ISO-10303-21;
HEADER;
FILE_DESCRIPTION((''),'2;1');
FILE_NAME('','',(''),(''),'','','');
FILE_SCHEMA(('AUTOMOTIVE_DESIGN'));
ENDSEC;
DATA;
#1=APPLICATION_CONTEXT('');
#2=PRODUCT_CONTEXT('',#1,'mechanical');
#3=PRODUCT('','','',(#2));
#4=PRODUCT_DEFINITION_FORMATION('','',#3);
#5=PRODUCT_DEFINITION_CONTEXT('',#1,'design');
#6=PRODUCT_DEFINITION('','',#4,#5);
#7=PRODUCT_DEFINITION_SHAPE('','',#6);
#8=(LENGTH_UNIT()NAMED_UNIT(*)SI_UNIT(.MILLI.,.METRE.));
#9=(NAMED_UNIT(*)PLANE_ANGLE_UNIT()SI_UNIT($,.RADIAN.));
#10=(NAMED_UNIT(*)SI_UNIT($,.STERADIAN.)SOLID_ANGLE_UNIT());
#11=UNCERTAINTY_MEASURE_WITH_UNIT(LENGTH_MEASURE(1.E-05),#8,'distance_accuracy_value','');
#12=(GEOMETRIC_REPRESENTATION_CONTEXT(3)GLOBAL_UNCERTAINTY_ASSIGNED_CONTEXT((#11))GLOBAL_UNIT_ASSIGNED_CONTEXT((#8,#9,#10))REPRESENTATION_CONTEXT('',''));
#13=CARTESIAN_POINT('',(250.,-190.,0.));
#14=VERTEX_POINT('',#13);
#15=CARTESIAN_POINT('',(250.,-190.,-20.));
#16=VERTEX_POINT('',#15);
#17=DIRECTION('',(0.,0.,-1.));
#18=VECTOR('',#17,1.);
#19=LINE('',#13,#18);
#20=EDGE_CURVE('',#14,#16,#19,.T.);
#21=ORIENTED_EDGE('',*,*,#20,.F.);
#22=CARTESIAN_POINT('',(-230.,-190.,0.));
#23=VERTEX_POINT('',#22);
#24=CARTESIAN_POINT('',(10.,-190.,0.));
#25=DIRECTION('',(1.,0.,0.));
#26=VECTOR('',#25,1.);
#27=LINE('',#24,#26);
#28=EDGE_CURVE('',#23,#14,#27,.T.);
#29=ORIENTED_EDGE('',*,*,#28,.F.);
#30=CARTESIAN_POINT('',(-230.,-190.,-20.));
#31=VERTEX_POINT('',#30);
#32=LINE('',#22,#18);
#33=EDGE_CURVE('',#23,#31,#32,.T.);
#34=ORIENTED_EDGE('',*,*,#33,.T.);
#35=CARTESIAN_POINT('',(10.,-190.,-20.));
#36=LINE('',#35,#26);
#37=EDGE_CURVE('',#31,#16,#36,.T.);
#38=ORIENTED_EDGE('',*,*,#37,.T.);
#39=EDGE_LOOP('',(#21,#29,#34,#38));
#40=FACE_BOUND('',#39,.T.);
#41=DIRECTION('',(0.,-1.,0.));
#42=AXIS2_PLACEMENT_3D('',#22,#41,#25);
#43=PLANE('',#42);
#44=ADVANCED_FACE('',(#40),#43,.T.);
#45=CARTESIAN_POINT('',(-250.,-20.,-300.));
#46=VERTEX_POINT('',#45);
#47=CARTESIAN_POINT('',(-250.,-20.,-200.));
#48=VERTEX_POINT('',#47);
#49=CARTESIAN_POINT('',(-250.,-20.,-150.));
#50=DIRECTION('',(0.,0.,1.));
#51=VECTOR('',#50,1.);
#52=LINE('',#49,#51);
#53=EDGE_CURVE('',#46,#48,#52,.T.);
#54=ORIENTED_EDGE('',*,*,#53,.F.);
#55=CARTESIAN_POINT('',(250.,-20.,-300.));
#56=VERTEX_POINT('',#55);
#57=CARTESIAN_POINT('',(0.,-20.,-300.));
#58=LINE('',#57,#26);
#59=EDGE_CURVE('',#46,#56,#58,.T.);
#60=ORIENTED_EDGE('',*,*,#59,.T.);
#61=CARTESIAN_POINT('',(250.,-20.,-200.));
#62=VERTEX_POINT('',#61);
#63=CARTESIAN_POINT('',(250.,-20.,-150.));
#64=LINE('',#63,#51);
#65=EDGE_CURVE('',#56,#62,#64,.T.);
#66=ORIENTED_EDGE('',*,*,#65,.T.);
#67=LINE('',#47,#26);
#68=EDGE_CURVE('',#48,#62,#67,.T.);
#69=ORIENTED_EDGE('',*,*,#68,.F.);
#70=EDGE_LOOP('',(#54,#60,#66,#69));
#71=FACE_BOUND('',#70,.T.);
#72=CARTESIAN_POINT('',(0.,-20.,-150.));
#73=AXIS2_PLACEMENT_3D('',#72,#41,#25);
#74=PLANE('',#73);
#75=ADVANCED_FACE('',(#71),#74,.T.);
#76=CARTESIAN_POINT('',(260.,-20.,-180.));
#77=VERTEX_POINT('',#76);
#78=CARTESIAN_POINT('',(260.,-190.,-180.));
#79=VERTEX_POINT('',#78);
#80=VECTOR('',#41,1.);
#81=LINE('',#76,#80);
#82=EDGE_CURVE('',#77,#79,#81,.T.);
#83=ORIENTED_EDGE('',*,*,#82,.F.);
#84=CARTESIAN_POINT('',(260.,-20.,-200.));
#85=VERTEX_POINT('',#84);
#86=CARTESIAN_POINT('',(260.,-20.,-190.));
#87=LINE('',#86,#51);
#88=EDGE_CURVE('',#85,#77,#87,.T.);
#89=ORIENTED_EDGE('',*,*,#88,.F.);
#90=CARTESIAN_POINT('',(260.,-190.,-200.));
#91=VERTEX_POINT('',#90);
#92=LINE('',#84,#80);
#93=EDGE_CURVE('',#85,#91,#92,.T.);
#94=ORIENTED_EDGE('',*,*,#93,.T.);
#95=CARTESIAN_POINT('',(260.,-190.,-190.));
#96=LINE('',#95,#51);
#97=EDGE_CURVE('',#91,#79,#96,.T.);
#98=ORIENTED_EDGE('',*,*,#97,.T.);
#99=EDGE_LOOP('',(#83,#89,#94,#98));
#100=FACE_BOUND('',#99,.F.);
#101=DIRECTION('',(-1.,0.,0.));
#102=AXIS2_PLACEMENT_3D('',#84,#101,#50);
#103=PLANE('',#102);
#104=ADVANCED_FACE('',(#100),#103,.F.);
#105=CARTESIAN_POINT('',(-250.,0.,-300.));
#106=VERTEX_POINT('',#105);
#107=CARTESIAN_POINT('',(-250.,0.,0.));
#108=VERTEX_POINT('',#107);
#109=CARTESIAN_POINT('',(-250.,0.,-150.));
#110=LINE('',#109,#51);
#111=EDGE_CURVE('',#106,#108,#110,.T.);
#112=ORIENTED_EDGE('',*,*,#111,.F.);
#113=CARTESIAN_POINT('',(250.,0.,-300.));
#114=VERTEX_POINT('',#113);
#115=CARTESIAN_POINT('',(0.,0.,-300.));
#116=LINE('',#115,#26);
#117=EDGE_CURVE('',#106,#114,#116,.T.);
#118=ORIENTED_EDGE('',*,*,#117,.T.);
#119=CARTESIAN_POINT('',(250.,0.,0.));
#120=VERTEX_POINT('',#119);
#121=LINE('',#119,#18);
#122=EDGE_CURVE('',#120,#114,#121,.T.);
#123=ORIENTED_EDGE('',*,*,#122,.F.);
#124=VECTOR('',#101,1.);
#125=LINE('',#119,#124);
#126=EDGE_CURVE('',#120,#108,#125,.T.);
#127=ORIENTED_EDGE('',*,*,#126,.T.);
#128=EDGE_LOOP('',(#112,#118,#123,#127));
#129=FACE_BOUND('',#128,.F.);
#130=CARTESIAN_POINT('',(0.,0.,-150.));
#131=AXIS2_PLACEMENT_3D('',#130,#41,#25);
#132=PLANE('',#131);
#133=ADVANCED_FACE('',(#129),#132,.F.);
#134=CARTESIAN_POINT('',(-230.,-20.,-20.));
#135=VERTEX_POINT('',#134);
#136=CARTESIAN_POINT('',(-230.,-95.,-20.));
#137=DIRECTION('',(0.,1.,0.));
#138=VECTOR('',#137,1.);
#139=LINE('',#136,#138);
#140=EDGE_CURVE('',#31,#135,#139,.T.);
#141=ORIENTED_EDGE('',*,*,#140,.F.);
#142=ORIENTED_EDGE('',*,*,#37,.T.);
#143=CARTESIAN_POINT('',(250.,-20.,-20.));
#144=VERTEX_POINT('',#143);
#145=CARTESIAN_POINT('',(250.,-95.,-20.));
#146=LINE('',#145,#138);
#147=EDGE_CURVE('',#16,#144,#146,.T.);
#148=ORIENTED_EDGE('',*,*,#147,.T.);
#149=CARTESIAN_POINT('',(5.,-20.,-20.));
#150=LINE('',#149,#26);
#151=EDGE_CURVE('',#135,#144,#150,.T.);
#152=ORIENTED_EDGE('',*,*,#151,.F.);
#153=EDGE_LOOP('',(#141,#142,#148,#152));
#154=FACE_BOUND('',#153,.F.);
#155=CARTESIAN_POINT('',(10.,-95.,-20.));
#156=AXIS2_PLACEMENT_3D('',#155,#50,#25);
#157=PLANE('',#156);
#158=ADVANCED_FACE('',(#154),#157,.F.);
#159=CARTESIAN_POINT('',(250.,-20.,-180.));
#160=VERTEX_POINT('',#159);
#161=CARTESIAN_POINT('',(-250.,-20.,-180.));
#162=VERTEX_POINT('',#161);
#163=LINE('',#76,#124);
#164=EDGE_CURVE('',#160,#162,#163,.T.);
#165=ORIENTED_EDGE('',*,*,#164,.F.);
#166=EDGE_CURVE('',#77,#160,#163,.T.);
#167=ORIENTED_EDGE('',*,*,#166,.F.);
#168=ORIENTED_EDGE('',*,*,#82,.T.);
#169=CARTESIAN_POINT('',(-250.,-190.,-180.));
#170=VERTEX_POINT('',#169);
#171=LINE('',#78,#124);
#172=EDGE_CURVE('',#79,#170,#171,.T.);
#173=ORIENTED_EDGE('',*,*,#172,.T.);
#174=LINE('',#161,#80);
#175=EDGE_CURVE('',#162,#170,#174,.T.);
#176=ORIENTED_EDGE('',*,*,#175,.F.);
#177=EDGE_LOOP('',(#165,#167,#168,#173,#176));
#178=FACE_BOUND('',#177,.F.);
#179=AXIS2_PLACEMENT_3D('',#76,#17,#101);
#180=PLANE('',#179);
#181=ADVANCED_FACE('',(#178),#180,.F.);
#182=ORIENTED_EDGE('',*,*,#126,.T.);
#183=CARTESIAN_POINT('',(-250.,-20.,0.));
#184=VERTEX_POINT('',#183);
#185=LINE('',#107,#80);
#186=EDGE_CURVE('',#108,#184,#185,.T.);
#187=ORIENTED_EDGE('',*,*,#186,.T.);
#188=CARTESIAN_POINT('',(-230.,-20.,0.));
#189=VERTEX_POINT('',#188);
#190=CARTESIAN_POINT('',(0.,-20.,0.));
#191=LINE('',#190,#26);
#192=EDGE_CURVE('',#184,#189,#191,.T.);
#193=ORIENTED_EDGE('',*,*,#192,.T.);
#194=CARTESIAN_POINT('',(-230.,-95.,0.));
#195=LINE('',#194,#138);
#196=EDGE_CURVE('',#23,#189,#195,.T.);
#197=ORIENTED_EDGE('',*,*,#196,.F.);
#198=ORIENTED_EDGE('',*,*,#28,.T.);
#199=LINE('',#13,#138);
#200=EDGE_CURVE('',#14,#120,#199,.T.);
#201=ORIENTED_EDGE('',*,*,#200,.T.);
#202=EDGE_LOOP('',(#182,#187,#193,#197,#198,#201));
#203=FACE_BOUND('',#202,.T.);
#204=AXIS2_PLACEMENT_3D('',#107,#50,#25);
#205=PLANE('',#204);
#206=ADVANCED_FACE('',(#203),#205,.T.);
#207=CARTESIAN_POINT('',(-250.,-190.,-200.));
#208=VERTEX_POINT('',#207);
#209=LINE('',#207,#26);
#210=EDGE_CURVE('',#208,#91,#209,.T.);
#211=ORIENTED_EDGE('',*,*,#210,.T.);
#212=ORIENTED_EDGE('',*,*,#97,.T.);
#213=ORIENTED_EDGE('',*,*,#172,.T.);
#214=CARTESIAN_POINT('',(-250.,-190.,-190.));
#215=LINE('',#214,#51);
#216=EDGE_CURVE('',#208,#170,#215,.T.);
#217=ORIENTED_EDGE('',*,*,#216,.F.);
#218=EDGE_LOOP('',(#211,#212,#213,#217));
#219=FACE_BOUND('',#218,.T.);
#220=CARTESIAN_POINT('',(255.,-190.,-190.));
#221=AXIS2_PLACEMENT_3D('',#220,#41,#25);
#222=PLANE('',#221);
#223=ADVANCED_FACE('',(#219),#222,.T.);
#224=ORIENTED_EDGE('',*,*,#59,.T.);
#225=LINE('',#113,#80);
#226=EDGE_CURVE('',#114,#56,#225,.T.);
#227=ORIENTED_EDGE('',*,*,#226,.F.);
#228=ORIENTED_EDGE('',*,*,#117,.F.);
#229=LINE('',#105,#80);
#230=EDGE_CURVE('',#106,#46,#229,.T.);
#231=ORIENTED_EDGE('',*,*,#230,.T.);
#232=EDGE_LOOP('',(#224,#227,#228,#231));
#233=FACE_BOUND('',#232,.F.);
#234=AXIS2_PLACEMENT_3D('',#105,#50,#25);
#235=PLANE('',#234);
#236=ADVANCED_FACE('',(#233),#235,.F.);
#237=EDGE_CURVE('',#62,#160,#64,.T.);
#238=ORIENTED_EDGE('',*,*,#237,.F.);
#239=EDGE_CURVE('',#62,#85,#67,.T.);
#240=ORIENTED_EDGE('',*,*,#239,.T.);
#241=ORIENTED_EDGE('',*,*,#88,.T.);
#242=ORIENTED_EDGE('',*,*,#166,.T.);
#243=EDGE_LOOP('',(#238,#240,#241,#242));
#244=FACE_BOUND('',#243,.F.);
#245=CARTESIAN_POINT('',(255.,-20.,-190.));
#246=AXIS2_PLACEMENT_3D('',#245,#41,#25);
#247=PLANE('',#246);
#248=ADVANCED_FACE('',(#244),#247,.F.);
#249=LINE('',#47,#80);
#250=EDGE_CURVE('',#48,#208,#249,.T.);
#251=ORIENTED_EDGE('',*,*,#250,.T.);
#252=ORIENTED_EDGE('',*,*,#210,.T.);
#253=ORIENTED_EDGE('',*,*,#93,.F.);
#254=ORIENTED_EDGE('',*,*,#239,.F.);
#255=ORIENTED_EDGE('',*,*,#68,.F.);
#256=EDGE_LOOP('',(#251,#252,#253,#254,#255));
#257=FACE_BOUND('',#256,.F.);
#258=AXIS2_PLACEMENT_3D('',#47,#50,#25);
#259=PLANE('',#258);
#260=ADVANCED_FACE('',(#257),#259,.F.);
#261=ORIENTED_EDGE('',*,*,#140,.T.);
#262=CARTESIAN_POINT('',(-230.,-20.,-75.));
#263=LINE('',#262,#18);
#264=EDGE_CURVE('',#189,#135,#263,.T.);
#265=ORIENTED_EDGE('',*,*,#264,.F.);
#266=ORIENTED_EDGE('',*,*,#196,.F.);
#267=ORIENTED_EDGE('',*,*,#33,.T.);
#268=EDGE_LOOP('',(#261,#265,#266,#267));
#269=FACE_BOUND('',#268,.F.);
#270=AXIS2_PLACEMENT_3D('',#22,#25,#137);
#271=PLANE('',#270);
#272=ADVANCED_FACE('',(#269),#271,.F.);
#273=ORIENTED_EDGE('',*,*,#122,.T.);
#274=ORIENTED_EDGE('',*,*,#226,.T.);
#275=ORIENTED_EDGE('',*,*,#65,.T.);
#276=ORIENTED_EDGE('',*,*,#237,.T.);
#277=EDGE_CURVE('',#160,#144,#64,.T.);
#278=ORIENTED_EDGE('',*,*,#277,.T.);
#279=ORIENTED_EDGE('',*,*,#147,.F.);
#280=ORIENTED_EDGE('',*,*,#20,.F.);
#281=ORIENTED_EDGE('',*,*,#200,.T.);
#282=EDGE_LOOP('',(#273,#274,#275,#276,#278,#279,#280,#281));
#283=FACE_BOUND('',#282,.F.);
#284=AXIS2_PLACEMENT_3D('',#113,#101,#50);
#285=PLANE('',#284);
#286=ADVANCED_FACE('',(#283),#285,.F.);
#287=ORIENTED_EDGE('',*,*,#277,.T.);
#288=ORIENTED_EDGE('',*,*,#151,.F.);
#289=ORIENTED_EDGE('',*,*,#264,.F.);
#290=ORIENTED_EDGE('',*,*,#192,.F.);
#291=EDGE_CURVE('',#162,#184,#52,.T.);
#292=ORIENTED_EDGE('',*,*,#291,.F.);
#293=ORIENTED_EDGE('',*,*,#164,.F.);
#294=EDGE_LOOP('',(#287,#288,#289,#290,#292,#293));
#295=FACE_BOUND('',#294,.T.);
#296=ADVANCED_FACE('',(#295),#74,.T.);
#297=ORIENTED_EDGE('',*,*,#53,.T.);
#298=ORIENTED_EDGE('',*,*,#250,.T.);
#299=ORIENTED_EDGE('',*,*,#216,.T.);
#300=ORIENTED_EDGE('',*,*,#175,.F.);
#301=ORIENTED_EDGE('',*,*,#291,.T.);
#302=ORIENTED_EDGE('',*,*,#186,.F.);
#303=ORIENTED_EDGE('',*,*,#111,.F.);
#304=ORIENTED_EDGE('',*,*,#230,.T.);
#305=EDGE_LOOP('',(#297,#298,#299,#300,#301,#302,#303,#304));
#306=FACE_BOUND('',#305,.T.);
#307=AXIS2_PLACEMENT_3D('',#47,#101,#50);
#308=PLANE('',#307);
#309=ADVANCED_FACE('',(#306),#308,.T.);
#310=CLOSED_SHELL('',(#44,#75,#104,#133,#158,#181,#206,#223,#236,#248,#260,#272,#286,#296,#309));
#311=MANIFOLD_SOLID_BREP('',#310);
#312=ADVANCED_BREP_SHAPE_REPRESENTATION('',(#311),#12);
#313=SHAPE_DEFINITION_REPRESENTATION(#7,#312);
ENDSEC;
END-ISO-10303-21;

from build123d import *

# Parameters (mm, degrees)
F0_W     = 480
F0_H     = 190
F1_DEPTH = 20
F2_W     = 500
F2_H     = 300
F3_DEPTH = 20
F4_W     = 10
F4_H     = 20
F4_W_2   = 500
F5_DEPTH = 170


# Not quite as in the source:
# - the program builds the solid bodies; features that only make, move or delete a surface that nothing else refers to are left out


with BuildPart() as f1:
    # F0 (on Top) → F1 (new body)
    with BuildSketch(Plane.XY):
        with Locations((10, -95)):
            Rectangle(F0_W, F0_H)
    extrude(amount=-F1_DEPTH)

    # F2 (on Front) → F3 (join)
    with BuildSketch(Plane.XZ):
        with Locations((0, -150)):
            Rectangle(F2_W, F2_H)
    extrude(amount=F3_DEPTH)

    # F4 (on face) → F5 (join)
    with BuildSketch(Plane.XZ.offset(20)):
        with Locations((255, -190)):
            Rectangle(F4_W, F4_H)
        with Locations((0, -190)):
            Rectangle(F4_W_2, F4_H)
    extrude(amount=F5_DEPTH)


solid = f1.part
